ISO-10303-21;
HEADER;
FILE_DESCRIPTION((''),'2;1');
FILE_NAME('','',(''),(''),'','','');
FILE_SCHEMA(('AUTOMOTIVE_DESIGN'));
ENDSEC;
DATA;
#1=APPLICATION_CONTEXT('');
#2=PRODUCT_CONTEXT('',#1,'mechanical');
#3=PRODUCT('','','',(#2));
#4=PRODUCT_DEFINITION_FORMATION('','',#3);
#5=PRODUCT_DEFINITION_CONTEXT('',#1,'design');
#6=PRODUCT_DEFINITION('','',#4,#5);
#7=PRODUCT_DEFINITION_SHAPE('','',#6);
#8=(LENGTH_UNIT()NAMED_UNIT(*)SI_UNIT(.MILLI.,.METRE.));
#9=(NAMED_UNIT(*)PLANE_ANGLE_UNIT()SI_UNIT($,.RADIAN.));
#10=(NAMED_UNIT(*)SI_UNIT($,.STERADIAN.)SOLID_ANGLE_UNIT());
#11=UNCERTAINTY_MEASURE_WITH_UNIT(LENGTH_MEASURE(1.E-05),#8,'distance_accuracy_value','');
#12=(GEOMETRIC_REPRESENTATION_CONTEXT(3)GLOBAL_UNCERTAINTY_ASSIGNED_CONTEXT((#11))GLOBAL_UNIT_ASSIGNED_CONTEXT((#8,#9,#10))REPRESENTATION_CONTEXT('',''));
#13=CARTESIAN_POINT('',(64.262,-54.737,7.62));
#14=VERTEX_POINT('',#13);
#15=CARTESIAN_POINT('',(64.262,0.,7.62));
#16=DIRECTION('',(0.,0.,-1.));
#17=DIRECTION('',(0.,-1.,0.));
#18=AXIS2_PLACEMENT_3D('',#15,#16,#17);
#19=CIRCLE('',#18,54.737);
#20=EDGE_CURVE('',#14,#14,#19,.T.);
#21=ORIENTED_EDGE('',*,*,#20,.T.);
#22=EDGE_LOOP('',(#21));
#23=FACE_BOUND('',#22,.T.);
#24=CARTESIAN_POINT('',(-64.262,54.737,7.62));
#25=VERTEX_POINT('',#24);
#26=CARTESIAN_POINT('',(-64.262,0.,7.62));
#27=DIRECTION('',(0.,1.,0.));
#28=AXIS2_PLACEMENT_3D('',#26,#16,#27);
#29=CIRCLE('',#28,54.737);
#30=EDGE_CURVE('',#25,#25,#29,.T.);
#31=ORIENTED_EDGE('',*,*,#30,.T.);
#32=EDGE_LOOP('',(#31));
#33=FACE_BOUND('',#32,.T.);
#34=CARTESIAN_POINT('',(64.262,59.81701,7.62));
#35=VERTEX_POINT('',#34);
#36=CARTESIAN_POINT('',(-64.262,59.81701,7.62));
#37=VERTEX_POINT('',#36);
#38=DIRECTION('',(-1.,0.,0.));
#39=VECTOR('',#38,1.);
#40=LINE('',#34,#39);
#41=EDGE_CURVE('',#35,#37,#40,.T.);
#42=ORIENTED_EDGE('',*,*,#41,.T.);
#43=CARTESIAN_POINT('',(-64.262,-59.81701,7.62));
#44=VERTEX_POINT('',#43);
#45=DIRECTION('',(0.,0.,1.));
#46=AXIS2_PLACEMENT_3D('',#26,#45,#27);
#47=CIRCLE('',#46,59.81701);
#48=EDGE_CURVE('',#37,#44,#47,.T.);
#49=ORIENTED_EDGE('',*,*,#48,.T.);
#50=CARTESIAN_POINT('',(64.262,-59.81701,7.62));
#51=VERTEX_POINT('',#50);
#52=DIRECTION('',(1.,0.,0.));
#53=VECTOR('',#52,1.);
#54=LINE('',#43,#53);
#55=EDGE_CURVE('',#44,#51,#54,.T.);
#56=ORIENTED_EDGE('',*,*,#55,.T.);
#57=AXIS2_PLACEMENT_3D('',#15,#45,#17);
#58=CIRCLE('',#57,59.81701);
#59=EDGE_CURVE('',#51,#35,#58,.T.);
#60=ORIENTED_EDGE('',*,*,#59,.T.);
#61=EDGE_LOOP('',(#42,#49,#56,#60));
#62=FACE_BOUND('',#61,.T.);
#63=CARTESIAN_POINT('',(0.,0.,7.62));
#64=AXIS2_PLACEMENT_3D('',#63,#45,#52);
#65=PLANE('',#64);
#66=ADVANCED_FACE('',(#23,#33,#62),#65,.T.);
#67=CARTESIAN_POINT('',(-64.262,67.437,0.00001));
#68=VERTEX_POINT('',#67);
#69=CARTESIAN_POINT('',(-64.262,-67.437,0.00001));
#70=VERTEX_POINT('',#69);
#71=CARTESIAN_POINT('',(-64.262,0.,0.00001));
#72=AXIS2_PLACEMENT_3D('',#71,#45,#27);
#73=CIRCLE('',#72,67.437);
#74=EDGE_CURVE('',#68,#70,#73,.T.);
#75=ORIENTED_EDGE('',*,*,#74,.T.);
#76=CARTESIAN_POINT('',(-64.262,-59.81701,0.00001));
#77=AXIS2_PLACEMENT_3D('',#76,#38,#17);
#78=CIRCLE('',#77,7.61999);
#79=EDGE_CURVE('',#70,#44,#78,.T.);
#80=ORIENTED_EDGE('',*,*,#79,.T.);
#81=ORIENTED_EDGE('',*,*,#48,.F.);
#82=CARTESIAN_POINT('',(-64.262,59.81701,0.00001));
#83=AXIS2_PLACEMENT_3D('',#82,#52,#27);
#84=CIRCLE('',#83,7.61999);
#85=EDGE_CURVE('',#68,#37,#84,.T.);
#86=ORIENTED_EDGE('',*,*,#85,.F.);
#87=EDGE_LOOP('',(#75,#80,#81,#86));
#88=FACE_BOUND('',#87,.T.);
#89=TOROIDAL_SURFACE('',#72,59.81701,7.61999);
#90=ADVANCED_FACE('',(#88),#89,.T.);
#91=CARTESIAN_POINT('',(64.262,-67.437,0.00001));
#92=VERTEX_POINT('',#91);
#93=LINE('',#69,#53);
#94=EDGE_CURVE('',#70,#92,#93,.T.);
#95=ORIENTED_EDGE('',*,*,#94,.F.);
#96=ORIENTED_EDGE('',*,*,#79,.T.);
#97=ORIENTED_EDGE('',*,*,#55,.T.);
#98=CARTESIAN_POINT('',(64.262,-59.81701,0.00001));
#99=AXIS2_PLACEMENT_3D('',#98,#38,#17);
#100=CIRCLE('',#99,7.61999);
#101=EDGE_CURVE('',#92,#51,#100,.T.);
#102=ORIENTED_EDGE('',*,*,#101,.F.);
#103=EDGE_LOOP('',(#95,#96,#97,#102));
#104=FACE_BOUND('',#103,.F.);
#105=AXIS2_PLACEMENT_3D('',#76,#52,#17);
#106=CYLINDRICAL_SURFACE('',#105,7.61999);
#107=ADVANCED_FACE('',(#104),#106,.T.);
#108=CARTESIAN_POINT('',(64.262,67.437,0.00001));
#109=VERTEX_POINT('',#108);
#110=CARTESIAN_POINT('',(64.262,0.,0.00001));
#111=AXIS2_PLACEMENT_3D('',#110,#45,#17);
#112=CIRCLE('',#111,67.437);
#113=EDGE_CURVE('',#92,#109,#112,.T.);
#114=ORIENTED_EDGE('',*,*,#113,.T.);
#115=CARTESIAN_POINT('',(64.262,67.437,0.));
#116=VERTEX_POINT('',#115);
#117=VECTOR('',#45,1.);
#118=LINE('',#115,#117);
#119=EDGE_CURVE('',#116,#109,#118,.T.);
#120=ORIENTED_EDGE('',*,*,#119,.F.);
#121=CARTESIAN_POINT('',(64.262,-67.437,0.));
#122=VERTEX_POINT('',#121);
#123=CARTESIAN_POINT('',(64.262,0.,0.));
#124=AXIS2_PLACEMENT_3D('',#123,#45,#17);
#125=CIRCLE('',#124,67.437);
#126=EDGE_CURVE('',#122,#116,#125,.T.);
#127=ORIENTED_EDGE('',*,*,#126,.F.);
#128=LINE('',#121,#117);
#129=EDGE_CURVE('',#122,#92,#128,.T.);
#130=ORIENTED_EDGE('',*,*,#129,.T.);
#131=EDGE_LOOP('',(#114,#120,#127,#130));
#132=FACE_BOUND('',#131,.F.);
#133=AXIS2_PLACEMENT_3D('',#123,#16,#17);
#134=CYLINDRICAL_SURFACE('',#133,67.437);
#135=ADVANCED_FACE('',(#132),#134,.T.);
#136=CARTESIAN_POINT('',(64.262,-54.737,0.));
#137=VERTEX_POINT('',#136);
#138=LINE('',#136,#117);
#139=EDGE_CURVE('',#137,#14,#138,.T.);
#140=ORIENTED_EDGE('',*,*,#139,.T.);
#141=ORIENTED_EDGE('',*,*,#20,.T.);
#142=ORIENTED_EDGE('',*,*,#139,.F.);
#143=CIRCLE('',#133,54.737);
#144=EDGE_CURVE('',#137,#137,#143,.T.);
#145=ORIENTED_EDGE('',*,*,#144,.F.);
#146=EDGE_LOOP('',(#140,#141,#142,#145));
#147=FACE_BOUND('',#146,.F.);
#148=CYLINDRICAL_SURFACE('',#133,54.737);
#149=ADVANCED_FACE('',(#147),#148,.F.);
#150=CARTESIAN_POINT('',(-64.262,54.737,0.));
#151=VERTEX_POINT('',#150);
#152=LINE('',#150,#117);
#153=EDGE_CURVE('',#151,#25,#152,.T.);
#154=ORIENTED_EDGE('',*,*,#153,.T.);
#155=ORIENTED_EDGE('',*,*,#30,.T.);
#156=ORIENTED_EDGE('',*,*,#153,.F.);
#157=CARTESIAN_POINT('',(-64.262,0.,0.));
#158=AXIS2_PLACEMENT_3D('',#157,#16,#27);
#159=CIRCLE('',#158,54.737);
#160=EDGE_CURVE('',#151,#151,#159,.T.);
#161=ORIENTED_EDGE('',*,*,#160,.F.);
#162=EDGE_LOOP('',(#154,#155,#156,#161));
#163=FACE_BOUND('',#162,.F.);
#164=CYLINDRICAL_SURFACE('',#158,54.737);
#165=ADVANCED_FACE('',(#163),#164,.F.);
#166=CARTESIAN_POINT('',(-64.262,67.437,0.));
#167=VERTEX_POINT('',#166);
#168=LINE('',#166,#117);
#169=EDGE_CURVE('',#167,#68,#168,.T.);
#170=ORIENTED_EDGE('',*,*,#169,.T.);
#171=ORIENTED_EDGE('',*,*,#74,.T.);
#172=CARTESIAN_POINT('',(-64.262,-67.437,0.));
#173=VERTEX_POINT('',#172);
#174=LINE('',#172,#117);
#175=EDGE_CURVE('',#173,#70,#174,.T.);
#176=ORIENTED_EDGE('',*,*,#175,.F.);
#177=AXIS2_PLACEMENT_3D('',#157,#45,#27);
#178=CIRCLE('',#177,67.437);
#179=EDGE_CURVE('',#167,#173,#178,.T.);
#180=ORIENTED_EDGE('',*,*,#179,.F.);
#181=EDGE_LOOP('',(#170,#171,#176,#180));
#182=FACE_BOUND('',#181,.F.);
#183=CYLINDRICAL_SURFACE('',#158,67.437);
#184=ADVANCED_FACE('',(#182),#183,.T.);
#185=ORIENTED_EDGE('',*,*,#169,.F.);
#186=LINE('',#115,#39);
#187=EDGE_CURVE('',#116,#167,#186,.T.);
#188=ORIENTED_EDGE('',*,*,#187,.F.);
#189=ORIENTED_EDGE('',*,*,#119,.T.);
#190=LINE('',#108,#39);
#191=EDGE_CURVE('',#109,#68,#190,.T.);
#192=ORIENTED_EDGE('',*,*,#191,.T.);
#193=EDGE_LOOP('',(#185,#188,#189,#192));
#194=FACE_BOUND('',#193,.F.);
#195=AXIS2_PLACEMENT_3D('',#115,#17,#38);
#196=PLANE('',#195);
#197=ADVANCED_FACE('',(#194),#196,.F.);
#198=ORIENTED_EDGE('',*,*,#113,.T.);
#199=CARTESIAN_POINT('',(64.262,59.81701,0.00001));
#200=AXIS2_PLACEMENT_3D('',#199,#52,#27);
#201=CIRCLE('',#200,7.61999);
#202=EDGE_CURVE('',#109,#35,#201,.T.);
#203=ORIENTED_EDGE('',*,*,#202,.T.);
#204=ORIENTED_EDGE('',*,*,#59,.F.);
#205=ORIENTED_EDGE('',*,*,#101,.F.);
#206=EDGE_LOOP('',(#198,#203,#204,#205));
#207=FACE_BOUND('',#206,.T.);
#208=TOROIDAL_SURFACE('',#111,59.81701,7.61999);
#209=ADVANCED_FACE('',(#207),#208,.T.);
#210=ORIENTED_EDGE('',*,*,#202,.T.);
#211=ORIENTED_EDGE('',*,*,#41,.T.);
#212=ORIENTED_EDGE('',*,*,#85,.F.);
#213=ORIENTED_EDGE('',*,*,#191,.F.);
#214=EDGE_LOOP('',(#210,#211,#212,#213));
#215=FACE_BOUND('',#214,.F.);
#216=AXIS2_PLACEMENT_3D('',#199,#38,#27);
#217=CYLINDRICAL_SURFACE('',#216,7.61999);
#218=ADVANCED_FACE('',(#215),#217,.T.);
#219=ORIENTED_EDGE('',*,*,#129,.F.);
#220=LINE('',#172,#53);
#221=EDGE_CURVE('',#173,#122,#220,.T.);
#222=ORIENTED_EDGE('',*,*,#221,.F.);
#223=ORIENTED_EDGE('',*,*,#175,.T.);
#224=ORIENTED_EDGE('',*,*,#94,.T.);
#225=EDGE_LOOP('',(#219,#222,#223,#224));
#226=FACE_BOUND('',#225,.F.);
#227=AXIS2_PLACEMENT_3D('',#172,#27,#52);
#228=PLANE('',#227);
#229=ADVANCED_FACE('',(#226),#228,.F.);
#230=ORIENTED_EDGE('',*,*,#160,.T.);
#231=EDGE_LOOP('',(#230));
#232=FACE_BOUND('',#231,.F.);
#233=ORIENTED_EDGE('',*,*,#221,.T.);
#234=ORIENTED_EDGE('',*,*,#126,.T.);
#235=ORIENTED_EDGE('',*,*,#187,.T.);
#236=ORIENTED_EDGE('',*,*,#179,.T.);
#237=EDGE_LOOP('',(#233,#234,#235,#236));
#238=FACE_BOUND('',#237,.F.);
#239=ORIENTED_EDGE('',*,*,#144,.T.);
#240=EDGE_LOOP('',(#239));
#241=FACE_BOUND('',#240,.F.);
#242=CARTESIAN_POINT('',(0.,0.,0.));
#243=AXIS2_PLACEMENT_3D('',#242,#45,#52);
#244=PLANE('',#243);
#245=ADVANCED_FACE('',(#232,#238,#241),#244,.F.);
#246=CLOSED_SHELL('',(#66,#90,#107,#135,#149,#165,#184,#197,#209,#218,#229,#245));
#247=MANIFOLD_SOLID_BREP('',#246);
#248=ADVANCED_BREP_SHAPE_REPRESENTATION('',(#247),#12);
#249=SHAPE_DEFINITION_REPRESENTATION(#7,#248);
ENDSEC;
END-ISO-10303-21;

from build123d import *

# Parameters (mm, degrees)
F1_DEPTH = 7.62
F2_R     = 7.61999


# Not quite as in the source:
# - a fillet or chamfer is up to 0.001 mm smaller than in the source, because OpenCascade refuses the exact size


with BuildPart() as f1:
    # F0 (on Top) → F1 (new body)
    with BuildSketch(Plane.XY):
        with BuildLine():
            ThreePointArc((64.2620003332, -67.437), (131.6990003332, 0), (64.2620003332, 67.437))
            Line((64.2620003332, 67.437), (-64.2620003332, 67.437))
            ThreePointArc((-64.2620003332, 67.437), (-131.6990003332, 0), (-64.2620003332, -67.437))
            Line((-64.2620003332, -67.437), (64.2620003332, -67.437))
        make_face()
        with BuildLine():
            Line((-64.2620003332, 54.737), (64.2620003332, 54.737))
            ThreePointArc((64.2620003332, 54.737), (118.9990003332, 0), (64.2620003332, -54.737))
            Line((64.2620003332, -54.737), (-64.2620003332, -54.737))
            ThreePointArc((-64.2620003332, -54.737), (-118.9990003332, 0), (-64.2620003332, 54.737))
        make_face(mode=Mode.SUBTRACT)
        with BuildLine():
            ThreePointArc((64.2620003332, -54.737), (9.5250003332, 0), (64.2620003332, 54.737))
            Line((64.2620003332, 54.737), (-64.2620003332, 54.737))
            ThreePointArc((-64.2620003332, 54.737), (-9.5250003332, 0), (-64.2620003332, -54.737))
            Line((-64.2620003332, -54.737), (64.2620003332, -54.737))
        make_face()
    extrude(amount=F1_DEPTH)

    # F2 (radius 7.62 in the source; OpenCascade refuses exactly that, so slightly less here)
    f2_edges = [f1.edges().sort_by_distance(p)[0] for p in [
        (-131.699, 0, 7.62),
    ]]
    fillet(f2_edges, radius=F2_R)


solid = f1.part
